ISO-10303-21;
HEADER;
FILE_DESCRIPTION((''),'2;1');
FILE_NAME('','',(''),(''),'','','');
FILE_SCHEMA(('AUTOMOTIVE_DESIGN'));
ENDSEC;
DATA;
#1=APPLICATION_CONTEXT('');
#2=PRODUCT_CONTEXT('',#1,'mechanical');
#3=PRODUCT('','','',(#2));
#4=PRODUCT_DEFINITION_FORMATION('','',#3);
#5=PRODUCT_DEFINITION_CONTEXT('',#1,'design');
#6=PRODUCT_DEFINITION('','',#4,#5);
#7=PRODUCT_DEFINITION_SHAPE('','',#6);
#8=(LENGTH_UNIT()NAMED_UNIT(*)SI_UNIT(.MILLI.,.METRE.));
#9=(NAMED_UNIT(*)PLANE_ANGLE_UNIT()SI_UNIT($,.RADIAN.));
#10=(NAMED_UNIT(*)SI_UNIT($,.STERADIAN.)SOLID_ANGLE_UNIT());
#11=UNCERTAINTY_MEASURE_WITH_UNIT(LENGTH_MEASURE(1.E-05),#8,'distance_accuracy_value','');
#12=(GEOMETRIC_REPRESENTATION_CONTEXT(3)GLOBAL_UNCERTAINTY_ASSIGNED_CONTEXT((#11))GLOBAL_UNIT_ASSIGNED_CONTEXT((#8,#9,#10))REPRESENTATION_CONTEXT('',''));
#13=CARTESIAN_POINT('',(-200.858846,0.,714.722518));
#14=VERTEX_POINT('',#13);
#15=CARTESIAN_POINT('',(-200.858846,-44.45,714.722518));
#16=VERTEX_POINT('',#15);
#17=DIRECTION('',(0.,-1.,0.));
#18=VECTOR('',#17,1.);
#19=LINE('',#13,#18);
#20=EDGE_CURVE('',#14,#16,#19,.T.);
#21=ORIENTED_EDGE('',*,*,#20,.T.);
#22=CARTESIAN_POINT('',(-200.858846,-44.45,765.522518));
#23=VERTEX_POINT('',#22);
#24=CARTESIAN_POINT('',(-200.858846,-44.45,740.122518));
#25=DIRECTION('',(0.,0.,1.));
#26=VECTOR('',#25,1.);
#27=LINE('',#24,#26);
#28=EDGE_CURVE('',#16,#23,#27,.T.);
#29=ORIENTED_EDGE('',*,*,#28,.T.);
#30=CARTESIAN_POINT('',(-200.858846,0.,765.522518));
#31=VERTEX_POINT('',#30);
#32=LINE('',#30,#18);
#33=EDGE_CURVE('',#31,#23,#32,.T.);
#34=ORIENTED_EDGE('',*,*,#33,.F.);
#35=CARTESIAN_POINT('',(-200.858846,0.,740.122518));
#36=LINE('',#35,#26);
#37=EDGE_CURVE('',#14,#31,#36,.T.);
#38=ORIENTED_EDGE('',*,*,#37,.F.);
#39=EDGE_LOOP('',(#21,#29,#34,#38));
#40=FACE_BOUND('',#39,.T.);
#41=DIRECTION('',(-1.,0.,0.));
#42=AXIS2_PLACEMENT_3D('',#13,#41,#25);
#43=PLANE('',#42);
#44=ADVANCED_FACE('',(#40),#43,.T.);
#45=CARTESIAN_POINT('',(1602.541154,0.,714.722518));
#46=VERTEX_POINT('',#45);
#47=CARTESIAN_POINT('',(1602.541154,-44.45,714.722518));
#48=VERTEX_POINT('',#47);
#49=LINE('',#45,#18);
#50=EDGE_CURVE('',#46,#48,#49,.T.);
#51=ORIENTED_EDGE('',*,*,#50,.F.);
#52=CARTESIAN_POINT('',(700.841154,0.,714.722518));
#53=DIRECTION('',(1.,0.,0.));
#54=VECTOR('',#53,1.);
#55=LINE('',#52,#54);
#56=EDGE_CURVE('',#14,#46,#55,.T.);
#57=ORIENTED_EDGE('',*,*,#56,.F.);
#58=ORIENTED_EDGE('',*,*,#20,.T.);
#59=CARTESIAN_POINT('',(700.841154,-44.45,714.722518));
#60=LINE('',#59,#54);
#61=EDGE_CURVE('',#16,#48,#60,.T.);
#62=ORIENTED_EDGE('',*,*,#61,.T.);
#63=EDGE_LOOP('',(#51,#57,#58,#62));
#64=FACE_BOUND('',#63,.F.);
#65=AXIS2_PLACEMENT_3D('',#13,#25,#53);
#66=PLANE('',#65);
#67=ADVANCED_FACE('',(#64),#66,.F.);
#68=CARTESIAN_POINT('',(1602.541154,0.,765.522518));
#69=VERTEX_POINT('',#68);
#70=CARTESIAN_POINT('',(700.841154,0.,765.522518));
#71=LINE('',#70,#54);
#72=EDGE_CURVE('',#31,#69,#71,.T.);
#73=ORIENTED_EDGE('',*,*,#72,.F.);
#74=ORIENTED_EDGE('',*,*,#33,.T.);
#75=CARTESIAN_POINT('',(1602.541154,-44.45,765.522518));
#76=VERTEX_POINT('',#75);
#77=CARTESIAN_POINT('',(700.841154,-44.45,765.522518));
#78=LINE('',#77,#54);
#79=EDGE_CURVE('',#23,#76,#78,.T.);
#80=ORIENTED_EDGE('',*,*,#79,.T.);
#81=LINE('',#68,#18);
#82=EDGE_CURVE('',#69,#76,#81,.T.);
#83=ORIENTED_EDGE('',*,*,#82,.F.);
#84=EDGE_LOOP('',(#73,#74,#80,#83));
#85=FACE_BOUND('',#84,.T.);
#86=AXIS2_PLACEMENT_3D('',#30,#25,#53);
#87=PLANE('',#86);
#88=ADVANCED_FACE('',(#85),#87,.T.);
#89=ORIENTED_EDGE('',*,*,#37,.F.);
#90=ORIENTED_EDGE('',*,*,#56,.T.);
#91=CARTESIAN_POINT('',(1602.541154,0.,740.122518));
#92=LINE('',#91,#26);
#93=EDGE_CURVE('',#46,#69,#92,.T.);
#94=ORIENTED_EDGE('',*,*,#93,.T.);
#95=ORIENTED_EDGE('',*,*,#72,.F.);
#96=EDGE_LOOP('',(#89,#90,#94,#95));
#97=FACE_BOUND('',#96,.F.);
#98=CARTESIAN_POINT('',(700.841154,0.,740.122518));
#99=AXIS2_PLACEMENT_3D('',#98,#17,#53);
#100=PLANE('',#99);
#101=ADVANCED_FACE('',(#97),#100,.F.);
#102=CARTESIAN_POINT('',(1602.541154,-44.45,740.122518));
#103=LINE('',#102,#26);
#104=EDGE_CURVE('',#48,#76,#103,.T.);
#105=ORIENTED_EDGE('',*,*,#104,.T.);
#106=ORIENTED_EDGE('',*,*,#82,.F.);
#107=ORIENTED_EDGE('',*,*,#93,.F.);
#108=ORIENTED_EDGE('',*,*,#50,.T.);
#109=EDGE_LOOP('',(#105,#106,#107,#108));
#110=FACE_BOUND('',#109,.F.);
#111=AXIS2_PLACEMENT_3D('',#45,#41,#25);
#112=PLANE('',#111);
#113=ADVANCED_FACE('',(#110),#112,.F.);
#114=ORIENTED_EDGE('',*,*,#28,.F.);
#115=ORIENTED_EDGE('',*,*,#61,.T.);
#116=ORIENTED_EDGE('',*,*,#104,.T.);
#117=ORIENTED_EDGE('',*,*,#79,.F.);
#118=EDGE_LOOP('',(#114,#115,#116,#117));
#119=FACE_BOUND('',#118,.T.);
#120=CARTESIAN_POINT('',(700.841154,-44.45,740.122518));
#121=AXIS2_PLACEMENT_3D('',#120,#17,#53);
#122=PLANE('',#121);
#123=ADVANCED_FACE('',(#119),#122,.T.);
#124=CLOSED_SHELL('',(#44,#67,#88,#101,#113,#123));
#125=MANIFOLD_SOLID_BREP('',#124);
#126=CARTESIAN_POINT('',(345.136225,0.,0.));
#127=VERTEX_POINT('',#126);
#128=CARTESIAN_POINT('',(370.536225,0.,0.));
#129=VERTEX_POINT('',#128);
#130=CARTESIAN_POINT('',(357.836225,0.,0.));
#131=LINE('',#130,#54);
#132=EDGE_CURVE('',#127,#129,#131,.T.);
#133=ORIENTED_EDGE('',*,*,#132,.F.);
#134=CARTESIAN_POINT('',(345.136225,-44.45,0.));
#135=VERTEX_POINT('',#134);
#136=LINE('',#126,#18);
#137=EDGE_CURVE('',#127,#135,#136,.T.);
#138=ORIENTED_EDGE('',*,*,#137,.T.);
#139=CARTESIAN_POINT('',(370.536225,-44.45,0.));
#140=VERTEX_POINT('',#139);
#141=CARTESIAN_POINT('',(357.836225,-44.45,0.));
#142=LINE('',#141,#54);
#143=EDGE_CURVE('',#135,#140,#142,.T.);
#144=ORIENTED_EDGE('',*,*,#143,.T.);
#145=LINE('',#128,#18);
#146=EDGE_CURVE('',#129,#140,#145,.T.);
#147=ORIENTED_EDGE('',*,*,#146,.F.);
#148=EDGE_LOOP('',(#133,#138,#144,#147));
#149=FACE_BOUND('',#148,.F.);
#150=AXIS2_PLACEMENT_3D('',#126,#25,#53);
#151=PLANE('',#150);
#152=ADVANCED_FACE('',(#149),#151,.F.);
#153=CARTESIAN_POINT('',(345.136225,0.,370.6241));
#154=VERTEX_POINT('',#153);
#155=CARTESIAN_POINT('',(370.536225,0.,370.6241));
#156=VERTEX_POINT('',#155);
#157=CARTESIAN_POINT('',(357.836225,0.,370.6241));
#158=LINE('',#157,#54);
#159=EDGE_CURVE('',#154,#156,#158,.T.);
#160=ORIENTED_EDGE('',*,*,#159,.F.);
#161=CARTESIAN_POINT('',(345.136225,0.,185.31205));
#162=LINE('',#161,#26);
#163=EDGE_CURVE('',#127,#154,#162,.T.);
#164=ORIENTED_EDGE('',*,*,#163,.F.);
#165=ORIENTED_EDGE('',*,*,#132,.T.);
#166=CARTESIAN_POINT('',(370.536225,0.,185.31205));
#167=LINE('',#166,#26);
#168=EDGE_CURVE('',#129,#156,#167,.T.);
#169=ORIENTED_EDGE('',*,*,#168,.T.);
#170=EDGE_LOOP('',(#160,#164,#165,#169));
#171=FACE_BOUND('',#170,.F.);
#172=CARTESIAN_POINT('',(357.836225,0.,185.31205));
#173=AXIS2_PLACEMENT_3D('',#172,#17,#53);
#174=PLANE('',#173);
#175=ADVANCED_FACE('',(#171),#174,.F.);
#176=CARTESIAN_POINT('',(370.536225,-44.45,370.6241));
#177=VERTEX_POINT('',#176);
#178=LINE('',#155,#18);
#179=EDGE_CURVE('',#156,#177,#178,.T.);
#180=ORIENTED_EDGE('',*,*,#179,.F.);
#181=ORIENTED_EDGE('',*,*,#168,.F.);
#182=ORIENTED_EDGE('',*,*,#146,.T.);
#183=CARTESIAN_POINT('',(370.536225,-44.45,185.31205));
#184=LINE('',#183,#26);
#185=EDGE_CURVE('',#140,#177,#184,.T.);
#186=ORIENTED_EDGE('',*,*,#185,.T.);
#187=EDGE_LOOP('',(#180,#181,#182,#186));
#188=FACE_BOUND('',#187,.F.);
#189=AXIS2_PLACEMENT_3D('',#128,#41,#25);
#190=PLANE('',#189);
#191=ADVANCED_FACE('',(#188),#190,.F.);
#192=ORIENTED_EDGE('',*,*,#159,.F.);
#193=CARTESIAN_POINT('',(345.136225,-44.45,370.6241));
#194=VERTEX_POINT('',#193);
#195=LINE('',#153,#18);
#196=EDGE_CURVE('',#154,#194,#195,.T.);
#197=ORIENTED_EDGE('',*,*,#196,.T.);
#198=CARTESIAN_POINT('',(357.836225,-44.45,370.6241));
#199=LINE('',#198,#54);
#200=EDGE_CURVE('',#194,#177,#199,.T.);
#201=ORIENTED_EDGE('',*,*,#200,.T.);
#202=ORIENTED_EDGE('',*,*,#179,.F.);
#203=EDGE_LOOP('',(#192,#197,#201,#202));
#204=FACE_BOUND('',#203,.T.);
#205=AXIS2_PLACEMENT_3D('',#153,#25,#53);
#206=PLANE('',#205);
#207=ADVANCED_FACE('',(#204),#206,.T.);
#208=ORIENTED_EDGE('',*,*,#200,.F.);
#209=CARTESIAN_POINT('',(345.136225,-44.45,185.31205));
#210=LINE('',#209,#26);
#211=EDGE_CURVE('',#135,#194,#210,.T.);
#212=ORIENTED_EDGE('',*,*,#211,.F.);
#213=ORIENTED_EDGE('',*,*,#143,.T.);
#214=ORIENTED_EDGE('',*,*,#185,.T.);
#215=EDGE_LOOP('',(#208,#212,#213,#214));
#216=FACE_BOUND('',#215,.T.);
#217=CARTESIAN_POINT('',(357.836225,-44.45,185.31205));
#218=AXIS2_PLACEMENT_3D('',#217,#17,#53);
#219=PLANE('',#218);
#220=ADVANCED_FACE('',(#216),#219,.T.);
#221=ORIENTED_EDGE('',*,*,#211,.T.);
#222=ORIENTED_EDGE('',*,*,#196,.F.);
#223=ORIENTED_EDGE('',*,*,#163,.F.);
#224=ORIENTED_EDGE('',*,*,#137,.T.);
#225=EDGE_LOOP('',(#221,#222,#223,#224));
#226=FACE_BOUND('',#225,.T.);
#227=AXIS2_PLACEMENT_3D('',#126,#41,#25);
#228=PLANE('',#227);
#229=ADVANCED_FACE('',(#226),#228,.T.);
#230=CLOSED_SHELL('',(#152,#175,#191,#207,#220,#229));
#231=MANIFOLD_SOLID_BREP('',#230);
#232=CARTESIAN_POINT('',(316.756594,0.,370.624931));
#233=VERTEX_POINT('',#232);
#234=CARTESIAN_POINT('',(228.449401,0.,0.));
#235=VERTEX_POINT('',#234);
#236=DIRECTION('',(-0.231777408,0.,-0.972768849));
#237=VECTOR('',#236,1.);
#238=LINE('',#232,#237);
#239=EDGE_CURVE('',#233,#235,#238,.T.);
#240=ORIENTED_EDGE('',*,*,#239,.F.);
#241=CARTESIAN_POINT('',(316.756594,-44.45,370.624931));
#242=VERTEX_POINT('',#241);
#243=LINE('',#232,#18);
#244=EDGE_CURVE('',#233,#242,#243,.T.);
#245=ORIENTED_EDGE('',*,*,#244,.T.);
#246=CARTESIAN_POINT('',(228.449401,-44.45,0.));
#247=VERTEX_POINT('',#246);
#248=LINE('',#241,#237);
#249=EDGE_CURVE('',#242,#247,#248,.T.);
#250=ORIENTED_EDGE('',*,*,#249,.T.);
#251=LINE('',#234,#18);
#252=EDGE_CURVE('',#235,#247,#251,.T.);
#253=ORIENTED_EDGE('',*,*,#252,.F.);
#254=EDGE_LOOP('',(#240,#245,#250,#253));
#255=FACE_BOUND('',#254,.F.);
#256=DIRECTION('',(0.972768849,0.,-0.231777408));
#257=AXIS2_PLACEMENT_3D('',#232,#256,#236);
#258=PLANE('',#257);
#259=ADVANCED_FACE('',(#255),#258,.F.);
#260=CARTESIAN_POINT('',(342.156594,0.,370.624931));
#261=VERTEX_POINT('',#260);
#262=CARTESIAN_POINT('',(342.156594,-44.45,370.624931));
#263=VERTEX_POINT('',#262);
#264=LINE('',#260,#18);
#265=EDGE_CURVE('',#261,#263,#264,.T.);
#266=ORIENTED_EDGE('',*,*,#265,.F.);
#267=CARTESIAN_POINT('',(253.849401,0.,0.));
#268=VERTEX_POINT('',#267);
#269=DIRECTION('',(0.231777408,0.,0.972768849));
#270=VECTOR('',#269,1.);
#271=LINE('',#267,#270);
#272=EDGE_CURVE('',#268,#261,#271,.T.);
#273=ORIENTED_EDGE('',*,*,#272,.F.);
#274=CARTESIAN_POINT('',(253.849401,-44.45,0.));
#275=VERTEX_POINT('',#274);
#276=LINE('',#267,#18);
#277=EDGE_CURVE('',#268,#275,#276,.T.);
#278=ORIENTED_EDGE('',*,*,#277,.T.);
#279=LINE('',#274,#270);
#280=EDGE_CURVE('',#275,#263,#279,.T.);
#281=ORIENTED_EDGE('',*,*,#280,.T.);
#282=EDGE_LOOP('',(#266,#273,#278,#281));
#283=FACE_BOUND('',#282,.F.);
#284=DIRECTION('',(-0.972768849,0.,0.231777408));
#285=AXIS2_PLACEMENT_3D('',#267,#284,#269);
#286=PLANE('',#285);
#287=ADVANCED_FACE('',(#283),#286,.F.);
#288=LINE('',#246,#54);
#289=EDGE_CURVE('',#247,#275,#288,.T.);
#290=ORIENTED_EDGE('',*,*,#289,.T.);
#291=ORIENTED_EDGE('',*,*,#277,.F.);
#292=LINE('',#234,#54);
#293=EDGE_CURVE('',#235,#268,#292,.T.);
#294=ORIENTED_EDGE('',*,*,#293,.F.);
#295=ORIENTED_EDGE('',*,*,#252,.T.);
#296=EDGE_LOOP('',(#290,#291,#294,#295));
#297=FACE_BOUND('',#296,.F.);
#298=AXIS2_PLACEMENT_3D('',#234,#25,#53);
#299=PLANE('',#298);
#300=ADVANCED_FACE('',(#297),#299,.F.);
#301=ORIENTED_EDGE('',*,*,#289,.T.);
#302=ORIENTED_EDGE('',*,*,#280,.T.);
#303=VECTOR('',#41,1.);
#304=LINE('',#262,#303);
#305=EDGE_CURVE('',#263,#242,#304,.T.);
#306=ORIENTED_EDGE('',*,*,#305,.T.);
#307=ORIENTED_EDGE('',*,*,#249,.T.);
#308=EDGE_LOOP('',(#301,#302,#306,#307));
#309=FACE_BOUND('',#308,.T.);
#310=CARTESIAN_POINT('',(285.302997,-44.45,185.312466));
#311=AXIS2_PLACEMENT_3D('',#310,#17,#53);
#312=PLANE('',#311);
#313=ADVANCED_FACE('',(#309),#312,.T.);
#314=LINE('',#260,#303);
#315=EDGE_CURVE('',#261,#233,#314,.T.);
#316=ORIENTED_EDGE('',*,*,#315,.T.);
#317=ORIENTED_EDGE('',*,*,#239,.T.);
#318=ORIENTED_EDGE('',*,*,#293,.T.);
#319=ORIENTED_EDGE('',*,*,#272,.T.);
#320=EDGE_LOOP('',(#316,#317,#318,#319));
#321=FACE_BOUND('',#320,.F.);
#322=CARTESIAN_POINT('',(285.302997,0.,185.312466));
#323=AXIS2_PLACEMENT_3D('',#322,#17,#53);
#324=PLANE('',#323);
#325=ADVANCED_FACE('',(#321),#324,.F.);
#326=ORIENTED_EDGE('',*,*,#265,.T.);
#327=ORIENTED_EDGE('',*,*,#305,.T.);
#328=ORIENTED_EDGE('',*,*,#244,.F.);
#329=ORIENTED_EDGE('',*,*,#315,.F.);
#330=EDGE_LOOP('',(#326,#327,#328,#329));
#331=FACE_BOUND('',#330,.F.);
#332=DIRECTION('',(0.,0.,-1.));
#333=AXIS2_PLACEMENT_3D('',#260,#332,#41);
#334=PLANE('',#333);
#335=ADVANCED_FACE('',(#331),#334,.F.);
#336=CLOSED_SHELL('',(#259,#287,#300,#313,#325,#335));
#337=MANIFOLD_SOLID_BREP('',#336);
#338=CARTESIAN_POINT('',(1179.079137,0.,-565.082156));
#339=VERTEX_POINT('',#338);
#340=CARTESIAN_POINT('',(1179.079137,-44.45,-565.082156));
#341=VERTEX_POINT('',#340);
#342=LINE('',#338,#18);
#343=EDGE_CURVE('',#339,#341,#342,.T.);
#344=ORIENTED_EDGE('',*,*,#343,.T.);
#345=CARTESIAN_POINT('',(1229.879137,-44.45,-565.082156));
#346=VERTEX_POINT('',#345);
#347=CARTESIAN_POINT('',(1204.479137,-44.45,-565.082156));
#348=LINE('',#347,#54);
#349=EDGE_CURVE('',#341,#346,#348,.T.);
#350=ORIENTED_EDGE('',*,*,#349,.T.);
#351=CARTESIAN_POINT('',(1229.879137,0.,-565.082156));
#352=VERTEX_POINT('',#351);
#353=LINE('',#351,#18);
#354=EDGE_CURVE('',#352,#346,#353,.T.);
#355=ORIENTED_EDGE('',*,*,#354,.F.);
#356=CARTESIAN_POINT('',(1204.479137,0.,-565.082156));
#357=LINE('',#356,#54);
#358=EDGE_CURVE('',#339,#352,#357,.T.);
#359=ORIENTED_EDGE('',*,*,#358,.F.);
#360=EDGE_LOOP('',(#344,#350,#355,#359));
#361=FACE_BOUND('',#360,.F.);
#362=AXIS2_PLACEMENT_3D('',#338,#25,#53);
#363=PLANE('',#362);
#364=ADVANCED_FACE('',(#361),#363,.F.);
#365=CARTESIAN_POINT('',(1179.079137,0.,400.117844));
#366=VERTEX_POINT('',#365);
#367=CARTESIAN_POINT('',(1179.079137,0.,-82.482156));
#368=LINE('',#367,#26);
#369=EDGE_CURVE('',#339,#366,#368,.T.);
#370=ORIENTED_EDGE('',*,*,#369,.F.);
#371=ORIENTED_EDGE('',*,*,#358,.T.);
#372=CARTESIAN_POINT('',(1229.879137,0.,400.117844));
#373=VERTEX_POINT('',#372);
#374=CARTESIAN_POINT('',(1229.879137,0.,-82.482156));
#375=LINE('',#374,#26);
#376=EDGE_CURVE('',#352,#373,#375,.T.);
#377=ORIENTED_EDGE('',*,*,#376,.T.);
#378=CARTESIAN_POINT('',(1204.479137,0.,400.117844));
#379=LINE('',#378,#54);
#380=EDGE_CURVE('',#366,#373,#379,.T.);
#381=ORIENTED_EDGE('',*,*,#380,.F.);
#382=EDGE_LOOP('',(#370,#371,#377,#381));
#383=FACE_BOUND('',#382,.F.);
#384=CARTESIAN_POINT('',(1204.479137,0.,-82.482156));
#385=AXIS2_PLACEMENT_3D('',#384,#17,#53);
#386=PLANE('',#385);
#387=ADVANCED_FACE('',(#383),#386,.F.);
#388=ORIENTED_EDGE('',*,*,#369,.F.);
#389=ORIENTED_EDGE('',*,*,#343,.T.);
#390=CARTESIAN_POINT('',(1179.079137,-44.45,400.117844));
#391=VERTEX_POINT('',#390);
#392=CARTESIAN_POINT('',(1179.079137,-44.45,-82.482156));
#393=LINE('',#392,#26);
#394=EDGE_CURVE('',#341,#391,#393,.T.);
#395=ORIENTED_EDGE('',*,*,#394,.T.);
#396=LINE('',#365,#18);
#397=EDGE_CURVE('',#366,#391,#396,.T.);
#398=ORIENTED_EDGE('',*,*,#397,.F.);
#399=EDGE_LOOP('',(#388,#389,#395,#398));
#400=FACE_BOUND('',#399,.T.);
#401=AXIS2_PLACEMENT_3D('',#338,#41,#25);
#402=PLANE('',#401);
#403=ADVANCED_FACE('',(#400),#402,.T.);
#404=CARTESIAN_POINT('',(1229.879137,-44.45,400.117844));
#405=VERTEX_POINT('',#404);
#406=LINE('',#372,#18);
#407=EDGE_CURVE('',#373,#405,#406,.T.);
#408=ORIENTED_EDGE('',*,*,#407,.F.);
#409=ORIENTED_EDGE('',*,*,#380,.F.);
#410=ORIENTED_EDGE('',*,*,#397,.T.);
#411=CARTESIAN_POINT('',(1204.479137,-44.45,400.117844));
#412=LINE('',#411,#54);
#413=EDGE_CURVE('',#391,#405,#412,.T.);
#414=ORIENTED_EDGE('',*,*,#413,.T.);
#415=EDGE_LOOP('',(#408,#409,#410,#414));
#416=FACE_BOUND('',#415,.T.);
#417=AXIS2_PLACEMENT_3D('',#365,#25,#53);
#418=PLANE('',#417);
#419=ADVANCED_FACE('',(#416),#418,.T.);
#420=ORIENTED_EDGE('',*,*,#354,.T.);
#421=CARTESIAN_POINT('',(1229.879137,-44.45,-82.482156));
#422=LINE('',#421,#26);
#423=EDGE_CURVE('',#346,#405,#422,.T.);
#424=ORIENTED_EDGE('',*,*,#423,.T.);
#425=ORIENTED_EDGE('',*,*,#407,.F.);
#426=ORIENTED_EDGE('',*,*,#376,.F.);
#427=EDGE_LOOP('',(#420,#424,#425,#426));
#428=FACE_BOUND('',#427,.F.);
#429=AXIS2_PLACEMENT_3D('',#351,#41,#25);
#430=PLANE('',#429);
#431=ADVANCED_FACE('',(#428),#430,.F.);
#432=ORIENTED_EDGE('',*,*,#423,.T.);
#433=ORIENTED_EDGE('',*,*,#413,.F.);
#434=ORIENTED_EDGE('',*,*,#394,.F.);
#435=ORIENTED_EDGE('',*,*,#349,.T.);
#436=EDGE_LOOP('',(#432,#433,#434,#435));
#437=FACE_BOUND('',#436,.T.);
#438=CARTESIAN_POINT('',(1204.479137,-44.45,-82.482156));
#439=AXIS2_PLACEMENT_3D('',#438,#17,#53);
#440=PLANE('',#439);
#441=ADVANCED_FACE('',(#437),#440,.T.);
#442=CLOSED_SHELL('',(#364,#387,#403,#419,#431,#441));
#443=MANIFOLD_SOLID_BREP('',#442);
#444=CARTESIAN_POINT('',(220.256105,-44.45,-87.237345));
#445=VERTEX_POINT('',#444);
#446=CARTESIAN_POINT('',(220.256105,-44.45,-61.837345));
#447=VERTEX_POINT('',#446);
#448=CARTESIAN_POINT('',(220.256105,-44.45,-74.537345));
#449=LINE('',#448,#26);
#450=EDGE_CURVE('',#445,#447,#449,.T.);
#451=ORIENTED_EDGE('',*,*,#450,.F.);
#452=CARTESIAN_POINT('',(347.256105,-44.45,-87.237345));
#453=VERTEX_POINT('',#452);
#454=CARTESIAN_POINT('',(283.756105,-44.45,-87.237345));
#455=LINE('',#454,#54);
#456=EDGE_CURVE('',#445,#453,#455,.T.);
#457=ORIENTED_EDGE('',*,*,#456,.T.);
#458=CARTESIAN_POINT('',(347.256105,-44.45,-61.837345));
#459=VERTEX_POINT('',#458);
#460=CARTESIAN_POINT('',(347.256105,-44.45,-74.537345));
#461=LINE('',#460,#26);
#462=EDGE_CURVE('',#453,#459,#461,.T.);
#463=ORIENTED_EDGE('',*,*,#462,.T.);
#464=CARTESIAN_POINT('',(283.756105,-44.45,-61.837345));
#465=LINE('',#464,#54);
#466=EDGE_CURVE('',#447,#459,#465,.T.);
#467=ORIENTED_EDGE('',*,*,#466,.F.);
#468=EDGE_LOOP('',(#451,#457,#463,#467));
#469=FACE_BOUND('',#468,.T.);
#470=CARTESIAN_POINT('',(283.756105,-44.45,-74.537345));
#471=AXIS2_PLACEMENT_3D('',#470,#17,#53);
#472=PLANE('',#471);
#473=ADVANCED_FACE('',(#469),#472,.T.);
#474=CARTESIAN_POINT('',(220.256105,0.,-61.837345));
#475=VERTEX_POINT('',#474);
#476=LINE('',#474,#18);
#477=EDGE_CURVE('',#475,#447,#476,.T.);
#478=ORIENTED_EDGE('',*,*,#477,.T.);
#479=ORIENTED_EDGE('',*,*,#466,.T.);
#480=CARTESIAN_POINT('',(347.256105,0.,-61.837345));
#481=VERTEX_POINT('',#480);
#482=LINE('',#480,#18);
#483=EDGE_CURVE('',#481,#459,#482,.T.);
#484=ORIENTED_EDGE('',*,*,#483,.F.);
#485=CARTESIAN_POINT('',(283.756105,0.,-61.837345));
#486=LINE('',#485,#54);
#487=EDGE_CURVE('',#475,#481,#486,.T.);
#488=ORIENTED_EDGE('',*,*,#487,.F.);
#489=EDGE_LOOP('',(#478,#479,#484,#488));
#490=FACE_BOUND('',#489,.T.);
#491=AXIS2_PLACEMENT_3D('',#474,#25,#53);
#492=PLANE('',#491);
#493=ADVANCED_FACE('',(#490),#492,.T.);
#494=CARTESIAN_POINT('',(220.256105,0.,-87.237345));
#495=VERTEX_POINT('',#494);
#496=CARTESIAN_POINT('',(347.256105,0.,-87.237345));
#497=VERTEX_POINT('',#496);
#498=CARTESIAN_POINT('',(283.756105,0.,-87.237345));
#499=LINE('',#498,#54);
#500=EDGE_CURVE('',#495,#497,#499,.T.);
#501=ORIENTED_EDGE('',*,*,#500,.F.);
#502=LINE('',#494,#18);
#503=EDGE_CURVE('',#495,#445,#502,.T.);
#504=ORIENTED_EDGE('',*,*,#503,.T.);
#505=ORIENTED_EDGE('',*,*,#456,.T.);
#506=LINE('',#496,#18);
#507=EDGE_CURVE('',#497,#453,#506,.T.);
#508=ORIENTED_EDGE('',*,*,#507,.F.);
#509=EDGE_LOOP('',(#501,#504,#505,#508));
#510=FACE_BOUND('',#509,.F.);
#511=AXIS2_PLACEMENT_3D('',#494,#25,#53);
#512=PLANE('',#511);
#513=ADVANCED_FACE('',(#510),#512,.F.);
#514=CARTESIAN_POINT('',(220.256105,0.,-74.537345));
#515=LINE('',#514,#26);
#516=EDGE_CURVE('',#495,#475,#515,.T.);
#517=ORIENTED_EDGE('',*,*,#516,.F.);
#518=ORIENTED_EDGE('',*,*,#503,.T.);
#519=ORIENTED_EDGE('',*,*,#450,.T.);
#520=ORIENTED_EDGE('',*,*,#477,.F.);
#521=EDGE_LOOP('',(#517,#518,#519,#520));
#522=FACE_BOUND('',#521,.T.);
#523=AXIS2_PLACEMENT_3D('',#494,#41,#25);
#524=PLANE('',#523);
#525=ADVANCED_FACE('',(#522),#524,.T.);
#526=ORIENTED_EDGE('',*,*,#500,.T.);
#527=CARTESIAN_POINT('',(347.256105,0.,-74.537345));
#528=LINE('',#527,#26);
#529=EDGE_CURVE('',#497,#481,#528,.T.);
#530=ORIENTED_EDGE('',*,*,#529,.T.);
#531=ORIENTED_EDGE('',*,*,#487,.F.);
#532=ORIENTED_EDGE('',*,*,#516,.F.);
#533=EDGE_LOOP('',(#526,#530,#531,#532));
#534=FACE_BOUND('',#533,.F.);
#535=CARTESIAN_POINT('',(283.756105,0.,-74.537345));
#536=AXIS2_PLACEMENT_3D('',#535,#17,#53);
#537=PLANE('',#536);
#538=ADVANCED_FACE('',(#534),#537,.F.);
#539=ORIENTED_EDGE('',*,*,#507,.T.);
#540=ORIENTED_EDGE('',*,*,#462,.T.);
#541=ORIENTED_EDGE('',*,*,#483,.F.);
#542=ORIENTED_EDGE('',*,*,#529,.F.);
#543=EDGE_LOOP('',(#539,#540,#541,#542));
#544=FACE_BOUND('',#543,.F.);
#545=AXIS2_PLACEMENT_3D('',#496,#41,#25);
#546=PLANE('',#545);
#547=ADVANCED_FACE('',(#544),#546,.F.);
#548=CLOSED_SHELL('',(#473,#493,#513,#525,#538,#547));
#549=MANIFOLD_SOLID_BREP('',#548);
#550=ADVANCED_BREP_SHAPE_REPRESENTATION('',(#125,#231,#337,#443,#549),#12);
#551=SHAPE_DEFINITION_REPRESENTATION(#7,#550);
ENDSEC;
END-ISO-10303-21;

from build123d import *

# Parameters (mm, degrees)
F1_DEPTH = 44.45
F0_W     = 127
F0_H     = 25.4
F0_W_2   = 50.8
F0_H_2   = 965.2
F0_W_3   = 1803.4
F0_H_3   = 50.8
F0_W_4   = 25.4
F0_H_4   = 370.6241


# Not quite as in the source:
# - a feature names something its author has since deleted; it is built from what else it names


with BuildPart() as f1:
    # F0 (on Front) → F1 (new body)
    with BuildSketch(Plane.XZ):
        Polygon((316.756593769, 370.624931355), (228.4494012073, 0), (253.8494012073, 0), (342.156593769, 370.624931355), align=None)
    extrude(amount=F1_DEPTH)


with BuildPart() as f1b:
    # F0 (on Front) → F1, piece 2 (new body)
    with BuildSketch(Plane.XZ):
        with Locations((283.7561050653, -74.5373453617)):
            Rectangle(F0_W, F0_H)
    extrude(amount=F1_DEPTH)


with BuildPart() as f1c:
    # F0 (on Front) → F1, piece 3 (new body)
    with BuildSketch(Plane.XZ):
        with Locations((1204.4791366577, -82.4821556568)):
            Rectangle(F0_W_2, F0_H_2)
    extrude(amount=F1_DEPTH)


with BuildPart() as f1d:
    # F0 (on Front) → F1, piece 4 (new body)
    with BuildSketch(Plane.XZ):
        with Locations((700.8411536932, 740.1225183487)):
            Rectangle(F0_W_3, F0_H_3)
    extrude(amount=F1_DEPTH)


with BuildPart() as f1e:
    # F0 (on Front) → F1, piece 5 (new body)
    with BuildSketch(Plane.XZ):
        with Locations((357.8362252235, 185.31205)):
            Rectangle(F0_W_4, F0_H_4)
    extrude(amount=F1_DEPTH)


solid = Compound([f1.part, f1b.part, f1c.part, f1d.part, f1e.part])
